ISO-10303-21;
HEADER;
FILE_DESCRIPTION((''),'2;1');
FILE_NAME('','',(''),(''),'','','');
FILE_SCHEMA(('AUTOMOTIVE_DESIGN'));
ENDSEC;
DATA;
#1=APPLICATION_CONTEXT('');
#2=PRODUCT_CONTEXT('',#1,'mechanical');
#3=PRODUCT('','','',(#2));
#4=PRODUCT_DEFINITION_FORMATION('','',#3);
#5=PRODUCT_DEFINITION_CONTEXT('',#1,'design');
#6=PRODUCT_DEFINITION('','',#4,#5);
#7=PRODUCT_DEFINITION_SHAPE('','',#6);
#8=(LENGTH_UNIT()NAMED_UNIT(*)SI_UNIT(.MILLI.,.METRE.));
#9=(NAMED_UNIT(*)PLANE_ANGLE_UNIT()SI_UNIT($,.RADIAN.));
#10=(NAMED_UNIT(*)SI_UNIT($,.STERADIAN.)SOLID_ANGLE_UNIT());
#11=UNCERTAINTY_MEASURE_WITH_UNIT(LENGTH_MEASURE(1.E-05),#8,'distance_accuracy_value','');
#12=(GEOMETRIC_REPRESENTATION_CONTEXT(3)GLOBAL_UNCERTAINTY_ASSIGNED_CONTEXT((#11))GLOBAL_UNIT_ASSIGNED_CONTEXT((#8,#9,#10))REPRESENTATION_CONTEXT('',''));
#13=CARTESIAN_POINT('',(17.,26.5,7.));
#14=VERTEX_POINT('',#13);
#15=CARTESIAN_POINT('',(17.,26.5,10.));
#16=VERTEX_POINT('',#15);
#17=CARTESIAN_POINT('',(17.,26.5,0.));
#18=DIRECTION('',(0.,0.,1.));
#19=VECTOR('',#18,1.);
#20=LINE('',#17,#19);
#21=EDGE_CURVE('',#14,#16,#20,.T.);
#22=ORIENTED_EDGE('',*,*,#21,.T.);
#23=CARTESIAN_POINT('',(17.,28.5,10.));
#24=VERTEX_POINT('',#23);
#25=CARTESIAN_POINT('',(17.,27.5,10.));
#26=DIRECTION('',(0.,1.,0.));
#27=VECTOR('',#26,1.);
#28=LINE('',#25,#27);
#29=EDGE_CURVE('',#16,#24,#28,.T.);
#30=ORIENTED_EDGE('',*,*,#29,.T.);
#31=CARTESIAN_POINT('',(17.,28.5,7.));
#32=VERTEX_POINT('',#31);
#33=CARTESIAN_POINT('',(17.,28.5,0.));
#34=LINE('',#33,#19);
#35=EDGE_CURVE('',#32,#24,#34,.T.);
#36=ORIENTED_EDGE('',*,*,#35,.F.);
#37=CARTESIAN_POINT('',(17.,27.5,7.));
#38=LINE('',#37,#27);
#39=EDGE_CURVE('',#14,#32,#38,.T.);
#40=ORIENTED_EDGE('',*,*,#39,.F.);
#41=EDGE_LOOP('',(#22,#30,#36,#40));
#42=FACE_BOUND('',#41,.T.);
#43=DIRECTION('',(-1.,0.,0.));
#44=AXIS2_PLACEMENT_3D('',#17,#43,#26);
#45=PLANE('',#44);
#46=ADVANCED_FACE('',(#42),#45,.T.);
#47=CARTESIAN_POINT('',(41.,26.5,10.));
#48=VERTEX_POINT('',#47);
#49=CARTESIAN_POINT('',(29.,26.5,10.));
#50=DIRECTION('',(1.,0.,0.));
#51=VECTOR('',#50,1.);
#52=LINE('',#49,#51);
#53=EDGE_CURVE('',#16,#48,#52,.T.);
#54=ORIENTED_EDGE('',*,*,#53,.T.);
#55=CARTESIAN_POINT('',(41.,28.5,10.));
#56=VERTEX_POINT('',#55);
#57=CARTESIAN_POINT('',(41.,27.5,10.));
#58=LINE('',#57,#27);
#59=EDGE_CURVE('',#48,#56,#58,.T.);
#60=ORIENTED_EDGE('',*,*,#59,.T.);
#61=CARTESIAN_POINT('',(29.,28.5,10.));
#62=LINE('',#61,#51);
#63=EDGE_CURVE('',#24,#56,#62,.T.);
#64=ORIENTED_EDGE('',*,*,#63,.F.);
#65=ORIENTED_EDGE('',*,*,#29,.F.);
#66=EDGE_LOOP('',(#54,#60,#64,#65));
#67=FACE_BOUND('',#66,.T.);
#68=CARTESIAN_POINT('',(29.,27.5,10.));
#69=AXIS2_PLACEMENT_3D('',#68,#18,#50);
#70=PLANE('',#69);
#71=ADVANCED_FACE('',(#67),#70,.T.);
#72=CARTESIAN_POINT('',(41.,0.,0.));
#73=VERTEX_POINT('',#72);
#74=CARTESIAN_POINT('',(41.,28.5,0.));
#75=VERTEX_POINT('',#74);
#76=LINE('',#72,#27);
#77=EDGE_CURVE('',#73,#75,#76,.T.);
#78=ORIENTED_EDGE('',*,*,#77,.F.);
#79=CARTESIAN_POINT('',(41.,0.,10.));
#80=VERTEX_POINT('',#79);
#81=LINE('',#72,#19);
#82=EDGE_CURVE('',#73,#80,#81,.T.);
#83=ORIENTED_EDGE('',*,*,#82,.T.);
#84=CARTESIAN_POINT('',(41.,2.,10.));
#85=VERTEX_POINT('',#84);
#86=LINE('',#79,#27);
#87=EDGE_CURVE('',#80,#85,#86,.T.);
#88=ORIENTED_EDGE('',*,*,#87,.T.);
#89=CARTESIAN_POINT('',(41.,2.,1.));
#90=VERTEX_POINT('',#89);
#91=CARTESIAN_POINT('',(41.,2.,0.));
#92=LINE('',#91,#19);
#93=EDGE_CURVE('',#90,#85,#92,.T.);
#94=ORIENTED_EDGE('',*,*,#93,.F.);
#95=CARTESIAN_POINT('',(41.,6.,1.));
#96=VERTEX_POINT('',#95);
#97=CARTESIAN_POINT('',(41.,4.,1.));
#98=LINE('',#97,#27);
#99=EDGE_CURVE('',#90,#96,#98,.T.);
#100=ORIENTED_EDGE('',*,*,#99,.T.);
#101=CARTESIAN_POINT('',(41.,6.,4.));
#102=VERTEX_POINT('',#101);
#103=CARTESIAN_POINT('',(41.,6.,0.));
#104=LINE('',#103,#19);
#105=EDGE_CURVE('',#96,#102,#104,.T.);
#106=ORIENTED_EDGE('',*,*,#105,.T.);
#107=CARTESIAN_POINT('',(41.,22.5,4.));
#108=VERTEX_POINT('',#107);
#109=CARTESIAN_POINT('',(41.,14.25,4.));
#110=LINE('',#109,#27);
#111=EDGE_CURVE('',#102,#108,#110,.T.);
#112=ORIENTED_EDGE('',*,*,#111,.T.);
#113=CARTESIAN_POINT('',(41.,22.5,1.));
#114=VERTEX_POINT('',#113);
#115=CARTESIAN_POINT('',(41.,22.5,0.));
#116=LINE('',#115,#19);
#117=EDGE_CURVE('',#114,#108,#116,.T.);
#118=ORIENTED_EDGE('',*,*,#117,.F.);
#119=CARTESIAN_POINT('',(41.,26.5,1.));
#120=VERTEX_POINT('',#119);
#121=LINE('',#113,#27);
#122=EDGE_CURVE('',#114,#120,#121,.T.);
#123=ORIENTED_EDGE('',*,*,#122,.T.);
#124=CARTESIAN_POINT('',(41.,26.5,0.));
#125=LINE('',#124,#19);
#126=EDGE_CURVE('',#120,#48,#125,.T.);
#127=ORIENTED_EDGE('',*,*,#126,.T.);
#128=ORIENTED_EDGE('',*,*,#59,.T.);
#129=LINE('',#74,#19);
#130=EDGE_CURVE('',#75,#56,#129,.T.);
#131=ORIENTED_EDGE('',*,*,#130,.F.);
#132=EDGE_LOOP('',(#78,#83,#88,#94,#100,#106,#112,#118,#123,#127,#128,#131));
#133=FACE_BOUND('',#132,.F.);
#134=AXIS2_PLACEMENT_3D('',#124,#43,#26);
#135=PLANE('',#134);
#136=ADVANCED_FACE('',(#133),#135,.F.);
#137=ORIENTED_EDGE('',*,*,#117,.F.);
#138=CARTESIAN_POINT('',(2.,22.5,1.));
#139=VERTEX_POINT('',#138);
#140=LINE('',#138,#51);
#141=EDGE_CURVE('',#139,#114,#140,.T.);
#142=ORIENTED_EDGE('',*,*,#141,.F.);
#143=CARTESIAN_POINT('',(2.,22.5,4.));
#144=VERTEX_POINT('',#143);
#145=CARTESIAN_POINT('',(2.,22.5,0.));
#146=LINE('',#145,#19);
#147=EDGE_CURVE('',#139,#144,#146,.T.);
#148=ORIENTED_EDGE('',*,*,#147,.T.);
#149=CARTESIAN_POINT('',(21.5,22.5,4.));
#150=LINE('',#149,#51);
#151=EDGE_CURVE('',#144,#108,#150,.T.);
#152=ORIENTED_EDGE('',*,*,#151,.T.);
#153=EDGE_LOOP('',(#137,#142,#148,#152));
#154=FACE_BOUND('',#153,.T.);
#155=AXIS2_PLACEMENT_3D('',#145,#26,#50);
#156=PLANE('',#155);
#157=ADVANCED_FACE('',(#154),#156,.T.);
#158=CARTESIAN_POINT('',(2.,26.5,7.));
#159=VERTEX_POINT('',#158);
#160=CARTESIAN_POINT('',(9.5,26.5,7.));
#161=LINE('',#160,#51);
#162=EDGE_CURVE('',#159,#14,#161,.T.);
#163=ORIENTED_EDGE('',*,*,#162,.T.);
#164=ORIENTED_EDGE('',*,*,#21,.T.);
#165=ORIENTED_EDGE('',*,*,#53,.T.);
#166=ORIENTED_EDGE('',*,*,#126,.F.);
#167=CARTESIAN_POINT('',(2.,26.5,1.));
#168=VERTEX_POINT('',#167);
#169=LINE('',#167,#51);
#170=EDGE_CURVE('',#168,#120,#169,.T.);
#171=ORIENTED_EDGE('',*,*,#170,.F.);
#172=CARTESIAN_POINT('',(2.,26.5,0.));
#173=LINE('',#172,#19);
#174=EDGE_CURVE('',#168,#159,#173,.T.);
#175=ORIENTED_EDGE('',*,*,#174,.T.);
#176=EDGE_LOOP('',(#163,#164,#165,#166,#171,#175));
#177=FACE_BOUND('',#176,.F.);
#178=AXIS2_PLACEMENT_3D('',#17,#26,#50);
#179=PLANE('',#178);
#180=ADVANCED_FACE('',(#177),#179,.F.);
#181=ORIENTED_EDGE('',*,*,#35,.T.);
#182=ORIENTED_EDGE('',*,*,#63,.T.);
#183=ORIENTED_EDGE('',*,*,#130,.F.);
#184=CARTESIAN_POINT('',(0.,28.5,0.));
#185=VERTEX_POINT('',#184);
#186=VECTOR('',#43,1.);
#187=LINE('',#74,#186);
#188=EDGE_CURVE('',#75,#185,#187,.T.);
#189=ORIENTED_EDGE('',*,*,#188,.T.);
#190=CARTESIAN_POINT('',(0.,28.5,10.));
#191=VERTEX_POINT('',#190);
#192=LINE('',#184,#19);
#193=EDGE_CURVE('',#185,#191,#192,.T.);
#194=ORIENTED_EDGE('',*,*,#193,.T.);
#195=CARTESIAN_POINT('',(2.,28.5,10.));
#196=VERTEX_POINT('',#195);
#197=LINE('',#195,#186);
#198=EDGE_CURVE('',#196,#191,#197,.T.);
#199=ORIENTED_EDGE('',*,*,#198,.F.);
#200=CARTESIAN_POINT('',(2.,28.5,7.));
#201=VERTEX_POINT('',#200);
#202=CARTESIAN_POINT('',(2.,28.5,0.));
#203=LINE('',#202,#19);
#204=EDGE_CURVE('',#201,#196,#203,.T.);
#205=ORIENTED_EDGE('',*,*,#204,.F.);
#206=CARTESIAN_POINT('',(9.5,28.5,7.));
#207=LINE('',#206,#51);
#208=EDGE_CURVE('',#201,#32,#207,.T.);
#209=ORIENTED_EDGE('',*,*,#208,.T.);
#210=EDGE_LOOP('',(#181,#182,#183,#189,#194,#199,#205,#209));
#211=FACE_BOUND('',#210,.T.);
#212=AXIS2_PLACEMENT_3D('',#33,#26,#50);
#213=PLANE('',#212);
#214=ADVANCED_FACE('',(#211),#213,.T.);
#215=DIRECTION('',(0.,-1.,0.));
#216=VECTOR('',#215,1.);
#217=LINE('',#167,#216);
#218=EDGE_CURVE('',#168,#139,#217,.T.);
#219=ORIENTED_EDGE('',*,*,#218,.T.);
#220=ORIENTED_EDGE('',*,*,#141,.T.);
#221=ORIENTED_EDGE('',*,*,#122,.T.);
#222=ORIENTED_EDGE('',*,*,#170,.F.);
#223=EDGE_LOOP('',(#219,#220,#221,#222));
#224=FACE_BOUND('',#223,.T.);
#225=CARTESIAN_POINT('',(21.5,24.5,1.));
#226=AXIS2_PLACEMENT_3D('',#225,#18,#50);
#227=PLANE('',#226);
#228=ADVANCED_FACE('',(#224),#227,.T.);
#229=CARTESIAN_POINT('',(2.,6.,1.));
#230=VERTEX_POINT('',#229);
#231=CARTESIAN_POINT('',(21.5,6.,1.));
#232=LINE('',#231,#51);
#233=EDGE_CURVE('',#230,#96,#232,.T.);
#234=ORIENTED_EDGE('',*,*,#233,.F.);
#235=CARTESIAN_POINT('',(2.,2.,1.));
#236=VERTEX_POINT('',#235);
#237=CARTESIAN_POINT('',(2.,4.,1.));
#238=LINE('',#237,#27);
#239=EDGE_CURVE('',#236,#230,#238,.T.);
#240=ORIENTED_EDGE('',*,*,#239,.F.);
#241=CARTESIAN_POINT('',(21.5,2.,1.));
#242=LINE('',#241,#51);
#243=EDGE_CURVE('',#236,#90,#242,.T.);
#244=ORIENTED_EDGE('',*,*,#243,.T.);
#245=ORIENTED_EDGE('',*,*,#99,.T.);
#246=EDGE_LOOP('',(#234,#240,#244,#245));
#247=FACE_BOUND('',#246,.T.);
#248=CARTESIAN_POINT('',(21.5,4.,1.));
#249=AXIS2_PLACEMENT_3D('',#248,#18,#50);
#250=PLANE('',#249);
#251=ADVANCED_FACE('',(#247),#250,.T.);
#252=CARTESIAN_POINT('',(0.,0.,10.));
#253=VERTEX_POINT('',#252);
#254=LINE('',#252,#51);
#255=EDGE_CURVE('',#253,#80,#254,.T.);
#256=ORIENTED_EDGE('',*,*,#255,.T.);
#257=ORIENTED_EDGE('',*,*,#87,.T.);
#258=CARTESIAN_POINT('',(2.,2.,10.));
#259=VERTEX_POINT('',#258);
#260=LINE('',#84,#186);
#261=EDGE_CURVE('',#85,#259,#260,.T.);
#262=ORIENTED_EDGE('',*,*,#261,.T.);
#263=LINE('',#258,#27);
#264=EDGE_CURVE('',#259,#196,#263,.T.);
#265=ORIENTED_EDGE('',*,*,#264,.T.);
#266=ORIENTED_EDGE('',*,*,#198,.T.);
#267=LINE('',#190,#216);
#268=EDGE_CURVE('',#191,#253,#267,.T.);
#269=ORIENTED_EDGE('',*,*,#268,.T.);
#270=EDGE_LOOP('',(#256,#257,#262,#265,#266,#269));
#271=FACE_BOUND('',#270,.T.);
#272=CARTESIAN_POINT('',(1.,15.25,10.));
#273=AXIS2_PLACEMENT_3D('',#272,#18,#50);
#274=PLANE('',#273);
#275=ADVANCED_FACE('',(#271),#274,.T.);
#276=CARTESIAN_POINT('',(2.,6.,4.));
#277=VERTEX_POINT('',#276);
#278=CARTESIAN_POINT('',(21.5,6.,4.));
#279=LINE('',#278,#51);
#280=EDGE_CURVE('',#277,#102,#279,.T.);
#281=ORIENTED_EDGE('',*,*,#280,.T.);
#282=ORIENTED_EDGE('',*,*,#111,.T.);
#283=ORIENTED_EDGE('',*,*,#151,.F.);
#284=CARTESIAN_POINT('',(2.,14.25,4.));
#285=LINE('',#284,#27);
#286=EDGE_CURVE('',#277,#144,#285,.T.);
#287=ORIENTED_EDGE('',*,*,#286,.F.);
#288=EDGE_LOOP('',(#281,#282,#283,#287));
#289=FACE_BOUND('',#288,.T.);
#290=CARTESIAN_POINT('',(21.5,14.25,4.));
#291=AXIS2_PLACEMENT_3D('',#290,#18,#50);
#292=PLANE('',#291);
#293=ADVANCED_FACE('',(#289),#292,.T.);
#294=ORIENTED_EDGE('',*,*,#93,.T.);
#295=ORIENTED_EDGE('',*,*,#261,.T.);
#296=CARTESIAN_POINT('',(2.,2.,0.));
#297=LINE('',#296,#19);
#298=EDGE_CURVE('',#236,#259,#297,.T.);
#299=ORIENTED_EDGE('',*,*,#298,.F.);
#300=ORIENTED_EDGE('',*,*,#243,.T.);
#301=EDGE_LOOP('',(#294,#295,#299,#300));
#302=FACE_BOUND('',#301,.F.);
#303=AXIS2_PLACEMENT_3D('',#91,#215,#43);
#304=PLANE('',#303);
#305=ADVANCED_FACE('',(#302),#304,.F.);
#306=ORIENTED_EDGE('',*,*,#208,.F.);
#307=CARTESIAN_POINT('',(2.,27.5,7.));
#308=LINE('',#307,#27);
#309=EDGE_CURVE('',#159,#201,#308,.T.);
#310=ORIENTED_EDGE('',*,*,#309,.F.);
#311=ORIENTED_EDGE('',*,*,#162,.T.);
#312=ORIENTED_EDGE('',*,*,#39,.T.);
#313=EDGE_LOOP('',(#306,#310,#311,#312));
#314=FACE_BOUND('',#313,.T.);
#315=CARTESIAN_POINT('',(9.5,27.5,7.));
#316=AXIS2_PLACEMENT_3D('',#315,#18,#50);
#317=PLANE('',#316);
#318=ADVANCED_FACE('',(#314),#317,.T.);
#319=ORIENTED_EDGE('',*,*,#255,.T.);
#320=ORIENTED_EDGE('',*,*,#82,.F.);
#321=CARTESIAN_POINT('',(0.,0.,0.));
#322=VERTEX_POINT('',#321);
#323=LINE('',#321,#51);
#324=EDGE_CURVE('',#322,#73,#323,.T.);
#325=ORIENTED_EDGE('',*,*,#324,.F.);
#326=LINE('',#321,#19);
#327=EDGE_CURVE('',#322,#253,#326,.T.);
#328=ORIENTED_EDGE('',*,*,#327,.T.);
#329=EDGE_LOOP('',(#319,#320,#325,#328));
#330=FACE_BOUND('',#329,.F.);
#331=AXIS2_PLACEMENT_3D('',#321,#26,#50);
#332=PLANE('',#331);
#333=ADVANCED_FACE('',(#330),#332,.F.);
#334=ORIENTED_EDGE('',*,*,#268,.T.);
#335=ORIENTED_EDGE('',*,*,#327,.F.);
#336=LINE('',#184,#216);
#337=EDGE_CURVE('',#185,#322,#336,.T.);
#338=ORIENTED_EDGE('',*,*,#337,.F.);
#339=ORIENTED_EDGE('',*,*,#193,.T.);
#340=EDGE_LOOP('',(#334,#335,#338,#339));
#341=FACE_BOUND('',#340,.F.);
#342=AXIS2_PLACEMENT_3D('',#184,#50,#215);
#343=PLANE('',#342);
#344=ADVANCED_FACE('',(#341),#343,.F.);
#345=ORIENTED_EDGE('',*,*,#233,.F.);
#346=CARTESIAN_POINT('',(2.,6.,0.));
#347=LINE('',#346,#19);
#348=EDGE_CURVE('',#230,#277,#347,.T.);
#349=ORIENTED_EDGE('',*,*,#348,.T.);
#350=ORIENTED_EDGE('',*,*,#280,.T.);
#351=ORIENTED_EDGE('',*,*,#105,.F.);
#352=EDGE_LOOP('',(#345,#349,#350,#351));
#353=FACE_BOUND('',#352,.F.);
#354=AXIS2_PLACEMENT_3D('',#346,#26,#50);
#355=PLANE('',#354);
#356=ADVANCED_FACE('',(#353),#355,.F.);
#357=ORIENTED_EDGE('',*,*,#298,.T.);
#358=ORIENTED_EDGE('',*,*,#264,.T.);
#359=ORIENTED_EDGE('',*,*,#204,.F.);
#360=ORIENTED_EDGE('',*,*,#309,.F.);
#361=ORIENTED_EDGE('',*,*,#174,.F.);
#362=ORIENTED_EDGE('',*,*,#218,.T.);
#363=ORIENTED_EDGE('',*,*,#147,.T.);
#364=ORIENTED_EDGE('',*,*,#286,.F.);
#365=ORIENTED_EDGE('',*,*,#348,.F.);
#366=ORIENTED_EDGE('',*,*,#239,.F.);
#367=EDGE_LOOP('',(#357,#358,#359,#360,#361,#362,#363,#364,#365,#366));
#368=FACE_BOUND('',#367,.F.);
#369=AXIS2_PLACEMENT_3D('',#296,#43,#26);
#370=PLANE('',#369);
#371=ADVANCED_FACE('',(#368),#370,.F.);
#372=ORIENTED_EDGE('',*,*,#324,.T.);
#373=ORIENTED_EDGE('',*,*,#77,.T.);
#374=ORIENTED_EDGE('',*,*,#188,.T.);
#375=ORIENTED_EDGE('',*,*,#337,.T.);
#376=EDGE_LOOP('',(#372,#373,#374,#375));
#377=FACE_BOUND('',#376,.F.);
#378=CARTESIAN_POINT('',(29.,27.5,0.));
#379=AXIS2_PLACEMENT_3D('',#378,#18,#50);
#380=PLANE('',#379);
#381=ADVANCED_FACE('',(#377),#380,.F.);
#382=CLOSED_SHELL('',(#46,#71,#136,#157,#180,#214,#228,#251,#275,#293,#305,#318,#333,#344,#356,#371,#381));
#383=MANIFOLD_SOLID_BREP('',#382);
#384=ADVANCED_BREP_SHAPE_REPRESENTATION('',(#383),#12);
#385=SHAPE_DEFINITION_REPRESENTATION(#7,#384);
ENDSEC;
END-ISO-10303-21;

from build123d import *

# Parameters (mm, degrees)
F1_DEPTH = 1
F0_W     = 39
F0_H     = 4
F0_H_2   = 16.5
F2_DEPTH = 4
F0_W_2   = 15
F0_H_3   = 2
F3_DEPTH = 7
F0_W_3   = 24
F4_DEPTH = 10


# Not quite as in the source:
# - a feature names something its author has since deleted; it is built from what else it names


with BuildPart() as f1:
    # F0 (on Top) → F1 (new body)
    with BuildSketch(Plane.XY):
        Polygon((17, 26.5), (2, 26.5), (2, 22.5), (41, 22.5), (41, 26.5), align=None)
    extrude(amount=F1_DEPTH)



with BuildPart() as f1b:
    # F0 (on Top) → F1, piece 2 (new body)
    with BuildSketch(Plane.XY):
        with Locations((21.5, 4)):
            Rectangle(F0_W, F0_H)
    extrude(amount=F1_DEPTH)


with BuildPart() as f1_1:
    add(f1.part)

    add(f1b.part)  # F2 merges F1b
    # F0 (on Top) → F2 (join)
    with BuildSketch(Plane.XY):
        with Locations((21.5, 14.25)):
            Rectangle(F0_W, F0_H_2)
    extrude(amount=F2_DEPTH)

    # F0 (on Top) → F3 (join)
    with BuildSketch(Plane.XY):
        with Locations((9.5, 27.5)):
            Rectangle(F0_W_2, F0_H_3)
    extrude(amount=F3_DEPTH)

    # F0 (on Top) → F4 (join)
    with BuildSketch(Plane.XY):
        with Locations((29, 27.5)):
            Rectangle(F0_W_3, F0_H_3)
        Polygon((2, 22.5), (2, 26.5), (2, 28.5), (0, 28.5), (0, 2), (2, 2), (2, 6), align=None)
        Polygon((41, 2), (2, 2), (0, 2), (0, 0), (41, 0), align=None)
    extrude(amount=F4_DEPTH)


solid = f1_1.part
